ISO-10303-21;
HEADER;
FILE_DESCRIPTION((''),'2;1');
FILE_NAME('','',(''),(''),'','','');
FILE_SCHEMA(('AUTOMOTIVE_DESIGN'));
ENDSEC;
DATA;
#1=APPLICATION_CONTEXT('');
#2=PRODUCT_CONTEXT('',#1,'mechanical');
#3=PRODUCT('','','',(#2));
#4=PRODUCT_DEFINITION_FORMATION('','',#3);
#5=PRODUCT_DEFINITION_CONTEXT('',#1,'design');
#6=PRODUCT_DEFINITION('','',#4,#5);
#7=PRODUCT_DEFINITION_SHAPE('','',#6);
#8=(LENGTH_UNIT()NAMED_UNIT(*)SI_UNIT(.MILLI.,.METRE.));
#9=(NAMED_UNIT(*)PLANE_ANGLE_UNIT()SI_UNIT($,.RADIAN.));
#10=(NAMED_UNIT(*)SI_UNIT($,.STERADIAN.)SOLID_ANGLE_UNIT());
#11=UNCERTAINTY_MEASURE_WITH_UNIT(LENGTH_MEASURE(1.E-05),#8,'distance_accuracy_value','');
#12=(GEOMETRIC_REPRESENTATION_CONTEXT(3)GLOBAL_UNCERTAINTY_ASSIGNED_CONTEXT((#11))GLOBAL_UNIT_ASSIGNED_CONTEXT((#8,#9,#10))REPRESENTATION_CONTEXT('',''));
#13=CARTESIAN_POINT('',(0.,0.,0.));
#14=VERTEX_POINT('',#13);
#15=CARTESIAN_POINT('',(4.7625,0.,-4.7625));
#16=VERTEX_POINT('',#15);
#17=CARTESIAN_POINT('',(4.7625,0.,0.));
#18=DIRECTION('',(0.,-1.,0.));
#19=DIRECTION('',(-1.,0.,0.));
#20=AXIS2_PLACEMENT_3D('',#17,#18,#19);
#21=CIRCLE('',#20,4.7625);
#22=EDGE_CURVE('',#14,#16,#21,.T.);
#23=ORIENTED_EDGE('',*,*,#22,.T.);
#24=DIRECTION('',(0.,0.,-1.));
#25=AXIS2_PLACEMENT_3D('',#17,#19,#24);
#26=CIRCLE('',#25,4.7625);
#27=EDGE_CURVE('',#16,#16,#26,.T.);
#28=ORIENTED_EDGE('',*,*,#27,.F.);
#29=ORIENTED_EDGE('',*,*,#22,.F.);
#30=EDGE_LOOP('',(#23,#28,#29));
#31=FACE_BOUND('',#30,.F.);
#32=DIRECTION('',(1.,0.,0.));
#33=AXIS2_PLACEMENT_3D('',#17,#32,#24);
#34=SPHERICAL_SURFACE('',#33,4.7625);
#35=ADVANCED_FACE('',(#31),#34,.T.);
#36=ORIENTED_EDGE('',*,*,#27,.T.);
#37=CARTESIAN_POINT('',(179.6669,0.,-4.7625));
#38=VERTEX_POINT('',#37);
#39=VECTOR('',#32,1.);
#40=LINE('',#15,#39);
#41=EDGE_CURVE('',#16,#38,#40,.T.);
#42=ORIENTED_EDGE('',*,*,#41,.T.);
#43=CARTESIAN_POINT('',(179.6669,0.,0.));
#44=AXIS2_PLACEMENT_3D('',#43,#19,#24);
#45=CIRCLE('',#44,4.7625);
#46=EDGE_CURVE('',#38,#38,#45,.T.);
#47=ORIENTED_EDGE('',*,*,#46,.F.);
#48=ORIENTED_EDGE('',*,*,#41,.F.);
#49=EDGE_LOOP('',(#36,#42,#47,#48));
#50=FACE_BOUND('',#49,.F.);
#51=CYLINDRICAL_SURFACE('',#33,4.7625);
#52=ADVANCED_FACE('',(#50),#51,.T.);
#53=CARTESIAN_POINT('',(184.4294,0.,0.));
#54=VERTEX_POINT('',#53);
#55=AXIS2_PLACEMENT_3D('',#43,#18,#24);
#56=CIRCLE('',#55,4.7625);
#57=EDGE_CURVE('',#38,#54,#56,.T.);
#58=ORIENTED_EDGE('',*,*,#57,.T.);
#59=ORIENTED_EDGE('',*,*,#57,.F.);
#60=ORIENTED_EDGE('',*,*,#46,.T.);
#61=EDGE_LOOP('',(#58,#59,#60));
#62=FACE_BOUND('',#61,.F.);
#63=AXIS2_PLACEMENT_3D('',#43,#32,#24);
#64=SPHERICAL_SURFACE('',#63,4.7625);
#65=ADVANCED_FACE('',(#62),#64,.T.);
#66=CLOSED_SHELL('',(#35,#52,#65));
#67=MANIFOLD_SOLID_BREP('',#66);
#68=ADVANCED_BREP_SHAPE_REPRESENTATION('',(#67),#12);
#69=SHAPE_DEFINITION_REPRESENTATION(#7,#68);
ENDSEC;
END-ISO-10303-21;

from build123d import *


# Not quite as in the source:
# - a feature names something its author has since deleted; it is built from what else it names


with BuildPart() as f1:
    # F0 (on Front) → F1 (revolve)
    with BuildSketch(Plane.XZ):
        with BuildLine():
            Line((92.2147, 0), (0, 0))
            ThreePointArc((0, 0), (1.3949039546, -3.3675960454), (4.7625, -4.7625))
            Line((4.7625, -4.7625), (179.6669, -4.7625))
            ThreePointArc((179.6669, -4.7625), (183.0344960454, -3.3675960454), (184.4294, 0))
            Line((184.4294, 0), (179.6669, 0))
            Line((179.6669, 0), (92.2147, 0))
        make_face()
    revolve(axis=Axis((46.10735, 0, 0), (-1, 0, 0)))


solid = f1.part
